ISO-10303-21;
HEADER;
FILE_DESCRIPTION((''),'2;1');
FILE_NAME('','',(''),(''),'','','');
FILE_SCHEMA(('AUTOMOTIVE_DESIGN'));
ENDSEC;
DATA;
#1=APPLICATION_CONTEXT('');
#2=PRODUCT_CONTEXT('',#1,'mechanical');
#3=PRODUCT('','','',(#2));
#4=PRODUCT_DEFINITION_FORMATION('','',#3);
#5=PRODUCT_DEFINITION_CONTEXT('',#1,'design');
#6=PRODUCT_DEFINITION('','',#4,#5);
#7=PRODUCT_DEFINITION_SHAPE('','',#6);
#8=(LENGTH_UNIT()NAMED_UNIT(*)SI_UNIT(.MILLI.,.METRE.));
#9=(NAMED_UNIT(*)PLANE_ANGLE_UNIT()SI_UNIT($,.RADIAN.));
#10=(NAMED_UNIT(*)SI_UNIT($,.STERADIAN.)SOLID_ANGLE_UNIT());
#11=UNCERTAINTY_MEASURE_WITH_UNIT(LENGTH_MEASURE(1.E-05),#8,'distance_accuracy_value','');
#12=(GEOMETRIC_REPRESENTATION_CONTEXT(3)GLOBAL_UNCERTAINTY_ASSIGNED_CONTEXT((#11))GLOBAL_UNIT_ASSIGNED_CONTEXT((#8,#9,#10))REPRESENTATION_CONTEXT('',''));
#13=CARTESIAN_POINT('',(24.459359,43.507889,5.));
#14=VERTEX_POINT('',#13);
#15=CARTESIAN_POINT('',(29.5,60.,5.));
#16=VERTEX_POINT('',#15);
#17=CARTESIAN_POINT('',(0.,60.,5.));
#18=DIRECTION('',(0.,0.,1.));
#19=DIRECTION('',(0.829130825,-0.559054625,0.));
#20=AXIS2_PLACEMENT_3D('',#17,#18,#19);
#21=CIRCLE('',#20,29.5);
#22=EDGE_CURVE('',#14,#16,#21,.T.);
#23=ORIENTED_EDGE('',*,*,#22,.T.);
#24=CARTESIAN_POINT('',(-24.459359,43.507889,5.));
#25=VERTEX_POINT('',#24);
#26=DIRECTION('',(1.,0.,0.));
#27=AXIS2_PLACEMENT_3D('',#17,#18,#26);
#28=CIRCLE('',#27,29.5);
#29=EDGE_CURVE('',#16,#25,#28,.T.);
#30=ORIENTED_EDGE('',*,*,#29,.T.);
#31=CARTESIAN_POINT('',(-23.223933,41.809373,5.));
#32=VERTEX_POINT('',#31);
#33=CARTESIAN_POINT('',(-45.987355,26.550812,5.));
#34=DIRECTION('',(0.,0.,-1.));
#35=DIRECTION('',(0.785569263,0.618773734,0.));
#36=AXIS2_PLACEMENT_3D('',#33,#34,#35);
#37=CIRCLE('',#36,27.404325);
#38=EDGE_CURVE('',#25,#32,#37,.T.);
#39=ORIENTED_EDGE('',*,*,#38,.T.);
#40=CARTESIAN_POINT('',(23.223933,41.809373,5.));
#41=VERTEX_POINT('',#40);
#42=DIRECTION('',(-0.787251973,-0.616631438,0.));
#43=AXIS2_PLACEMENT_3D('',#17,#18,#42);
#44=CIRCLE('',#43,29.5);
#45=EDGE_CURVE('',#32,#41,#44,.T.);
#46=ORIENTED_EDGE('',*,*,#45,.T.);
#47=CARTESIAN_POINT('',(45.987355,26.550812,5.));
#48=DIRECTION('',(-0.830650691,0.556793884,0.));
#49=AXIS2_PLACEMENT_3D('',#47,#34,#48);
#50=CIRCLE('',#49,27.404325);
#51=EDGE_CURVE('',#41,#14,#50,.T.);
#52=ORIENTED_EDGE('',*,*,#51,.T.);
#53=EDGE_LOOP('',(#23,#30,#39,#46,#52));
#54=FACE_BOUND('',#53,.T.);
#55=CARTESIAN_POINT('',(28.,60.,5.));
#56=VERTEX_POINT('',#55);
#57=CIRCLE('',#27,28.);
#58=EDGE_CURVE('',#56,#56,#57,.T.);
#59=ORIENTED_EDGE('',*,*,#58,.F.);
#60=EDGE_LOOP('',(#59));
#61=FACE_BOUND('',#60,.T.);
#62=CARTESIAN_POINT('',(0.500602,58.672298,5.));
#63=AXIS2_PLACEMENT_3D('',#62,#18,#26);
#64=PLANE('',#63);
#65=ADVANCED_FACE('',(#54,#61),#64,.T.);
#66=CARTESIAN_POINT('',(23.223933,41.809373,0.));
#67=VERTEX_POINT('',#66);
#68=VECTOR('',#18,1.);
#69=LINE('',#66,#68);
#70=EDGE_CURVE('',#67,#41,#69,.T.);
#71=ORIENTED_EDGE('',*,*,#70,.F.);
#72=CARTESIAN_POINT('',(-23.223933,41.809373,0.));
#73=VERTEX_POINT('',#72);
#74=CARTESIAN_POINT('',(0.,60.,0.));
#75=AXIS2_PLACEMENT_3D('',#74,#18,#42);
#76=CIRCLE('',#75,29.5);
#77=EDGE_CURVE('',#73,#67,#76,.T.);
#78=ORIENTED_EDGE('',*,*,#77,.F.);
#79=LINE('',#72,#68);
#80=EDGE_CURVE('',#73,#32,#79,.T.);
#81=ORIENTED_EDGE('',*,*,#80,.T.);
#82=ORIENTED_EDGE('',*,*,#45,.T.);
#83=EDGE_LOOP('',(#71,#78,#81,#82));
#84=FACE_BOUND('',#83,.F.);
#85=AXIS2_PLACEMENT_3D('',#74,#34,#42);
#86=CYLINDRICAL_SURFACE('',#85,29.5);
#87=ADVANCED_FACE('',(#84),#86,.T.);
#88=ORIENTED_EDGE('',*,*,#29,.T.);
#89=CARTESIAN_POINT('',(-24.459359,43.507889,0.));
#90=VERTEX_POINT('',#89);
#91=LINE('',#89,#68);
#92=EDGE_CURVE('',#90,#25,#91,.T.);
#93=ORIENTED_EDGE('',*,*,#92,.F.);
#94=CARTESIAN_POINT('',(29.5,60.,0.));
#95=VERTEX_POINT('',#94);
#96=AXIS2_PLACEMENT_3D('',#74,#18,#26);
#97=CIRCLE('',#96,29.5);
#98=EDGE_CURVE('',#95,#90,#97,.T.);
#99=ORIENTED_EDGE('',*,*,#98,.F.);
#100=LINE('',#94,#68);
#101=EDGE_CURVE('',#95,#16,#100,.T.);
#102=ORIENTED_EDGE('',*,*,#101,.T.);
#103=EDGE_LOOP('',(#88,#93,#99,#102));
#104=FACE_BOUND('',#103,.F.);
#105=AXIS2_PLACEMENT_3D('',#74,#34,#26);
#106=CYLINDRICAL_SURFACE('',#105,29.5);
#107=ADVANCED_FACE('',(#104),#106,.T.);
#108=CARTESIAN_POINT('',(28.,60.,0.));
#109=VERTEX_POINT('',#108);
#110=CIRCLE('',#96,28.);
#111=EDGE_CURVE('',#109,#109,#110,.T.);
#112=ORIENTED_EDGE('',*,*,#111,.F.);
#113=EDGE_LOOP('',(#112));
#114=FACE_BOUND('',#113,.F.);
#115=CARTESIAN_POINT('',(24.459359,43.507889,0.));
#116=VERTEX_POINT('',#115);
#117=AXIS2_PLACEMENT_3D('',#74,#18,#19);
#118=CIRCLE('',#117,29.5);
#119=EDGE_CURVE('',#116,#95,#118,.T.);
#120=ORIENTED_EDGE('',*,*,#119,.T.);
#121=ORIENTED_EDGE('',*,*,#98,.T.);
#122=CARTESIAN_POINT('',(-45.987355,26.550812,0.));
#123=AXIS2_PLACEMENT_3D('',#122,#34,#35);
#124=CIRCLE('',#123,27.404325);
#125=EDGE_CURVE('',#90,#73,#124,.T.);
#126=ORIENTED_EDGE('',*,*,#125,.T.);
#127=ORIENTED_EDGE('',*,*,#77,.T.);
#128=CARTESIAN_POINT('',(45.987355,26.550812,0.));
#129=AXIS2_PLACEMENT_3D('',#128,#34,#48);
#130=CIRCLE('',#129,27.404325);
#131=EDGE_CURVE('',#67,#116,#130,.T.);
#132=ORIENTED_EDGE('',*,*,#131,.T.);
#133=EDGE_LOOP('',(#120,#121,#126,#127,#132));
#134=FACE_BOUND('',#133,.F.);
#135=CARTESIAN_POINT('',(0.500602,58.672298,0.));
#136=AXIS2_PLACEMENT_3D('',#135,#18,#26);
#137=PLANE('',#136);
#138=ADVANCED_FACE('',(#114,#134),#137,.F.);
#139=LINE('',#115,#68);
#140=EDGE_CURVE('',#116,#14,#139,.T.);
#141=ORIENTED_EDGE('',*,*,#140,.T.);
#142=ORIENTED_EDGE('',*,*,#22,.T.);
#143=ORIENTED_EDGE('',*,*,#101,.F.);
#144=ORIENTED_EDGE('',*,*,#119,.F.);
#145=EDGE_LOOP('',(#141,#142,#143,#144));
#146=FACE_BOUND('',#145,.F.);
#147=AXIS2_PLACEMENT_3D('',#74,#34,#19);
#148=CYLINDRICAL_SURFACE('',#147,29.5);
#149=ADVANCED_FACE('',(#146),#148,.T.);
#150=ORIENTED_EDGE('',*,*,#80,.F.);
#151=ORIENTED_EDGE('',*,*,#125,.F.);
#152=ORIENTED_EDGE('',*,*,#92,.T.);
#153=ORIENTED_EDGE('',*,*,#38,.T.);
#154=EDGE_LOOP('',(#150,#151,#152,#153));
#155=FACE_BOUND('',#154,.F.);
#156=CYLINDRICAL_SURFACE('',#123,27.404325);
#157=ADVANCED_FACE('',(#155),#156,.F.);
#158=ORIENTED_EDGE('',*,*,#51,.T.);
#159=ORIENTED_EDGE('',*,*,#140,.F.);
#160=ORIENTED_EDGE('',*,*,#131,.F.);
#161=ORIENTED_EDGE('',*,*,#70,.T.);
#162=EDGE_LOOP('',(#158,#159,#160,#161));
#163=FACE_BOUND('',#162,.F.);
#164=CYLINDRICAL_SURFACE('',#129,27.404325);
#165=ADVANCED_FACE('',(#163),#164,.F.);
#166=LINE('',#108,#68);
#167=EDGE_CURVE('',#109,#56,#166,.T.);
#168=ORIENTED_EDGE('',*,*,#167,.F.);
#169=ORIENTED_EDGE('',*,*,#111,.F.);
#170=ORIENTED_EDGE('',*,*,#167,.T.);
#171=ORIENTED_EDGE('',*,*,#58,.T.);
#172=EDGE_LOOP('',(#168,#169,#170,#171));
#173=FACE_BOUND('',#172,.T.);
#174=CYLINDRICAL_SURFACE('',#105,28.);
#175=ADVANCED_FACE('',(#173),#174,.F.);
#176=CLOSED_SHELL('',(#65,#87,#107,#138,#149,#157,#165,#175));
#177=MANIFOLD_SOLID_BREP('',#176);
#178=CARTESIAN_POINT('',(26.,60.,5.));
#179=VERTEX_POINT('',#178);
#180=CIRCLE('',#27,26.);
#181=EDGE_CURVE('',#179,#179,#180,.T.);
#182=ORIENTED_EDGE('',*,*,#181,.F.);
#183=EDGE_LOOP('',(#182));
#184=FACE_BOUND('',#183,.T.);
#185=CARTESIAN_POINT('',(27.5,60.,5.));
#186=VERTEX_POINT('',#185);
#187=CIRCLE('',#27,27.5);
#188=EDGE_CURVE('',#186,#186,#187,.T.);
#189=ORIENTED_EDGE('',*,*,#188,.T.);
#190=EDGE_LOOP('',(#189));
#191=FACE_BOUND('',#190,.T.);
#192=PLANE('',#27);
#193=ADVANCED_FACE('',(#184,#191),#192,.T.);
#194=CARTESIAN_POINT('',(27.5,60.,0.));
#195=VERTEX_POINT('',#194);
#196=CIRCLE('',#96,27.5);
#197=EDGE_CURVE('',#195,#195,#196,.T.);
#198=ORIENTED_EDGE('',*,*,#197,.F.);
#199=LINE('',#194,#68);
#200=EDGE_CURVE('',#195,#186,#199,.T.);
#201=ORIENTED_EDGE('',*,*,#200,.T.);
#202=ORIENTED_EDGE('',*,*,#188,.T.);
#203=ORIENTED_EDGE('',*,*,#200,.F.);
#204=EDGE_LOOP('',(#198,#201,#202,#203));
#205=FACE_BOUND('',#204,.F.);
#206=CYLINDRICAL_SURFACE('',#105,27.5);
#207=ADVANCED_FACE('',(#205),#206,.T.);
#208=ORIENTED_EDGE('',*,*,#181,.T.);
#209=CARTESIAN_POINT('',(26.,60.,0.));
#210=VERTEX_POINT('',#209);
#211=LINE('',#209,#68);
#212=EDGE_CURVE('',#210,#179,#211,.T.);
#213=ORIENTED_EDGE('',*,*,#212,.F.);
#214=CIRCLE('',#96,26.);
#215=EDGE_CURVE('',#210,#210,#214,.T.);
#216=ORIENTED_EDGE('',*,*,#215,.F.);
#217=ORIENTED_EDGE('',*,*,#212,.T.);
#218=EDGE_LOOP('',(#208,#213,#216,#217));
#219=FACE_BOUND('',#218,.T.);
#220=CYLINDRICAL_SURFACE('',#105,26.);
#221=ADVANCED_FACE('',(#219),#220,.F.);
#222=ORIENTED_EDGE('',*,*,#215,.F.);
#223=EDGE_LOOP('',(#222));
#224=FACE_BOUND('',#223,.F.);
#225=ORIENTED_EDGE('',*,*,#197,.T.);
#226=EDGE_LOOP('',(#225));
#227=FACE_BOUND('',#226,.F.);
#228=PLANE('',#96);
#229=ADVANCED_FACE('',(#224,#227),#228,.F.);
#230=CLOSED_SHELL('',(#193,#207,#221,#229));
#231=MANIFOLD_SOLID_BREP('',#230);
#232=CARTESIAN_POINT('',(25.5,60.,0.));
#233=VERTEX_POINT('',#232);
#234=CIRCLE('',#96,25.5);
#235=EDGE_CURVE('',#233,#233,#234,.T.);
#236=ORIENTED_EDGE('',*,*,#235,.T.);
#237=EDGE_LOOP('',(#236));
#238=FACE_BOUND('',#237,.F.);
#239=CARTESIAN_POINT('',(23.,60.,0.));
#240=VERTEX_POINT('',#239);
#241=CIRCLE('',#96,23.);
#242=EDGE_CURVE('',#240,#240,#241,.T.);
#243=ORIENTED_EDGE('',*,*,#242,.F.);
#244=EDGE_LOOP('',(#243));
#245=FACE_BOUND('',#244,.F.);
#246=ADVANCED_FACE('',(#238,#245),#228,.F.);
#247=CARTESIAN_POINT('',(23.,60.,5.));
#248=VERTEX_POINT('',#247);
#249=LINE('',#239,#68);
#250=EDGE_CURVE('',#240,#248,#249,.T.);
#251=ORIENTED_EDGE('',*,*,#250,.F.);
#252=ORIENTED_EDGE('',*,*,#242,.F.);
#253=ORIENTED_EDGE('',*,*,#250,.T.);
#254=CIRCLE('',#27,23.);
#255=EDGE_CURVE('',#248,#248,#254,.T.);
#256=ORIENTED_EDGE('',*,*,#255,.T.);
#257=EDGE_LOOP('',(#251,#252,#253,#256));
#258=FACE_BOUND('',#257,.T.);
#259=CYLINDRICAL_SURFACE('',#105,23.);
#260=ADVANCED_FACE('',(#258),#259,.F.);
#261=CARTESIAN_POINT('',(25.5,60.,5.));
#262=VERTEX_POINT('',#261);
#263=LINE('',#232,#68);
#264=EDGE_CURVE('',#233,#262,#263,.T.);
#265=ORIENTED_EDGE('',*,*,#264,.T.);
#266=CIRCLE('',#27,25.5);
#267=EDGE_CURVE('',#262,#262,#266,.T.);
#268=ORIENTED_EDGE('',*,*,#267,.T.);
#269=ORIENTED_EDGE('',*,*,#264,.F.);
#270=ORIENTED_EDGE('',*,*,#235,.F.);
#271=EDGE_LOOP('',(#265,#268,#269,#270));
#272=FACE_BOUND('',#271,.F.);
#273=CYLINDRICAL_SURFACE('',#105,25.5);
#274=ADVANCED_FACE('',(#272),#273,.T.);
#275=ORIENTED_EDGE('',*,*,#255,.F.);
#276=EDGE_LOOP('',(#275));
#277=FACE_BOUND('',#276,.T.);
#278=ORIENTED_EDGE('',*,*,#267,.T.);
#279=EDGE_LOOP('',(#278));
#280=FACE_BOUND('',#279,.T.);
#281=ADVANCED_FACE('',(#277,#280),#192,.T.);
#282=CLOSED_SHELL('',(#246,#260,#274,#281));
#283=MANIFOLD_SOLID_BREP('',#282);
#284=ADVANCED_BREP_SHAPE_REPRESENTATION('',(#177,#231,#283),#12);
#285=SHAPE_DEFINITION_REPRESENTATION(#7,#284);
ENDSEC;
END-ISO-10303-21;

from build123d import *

# Parameters (mm, degrees)
F0_R     = 28
F1_DEPTH = 5
F0_R_2   = 25.5
F0_R_3   = 23
F0_R_4   = 27.5
F0_R_5   = 26


# Not quite as in the source:
# - a feature names something its author has since deleted; it is built from what else it names


with BuildPart() as f1:
    # F0 (on Top) → F1 (new body)
    with BuildSketch(Plane.XY):
        with BuildLine():
            ThreePointArc((24.4593593513, 43.5078885487), (28.211709456, 51.377387312), (29.5, 60))
            ThreePointArc((29.5, 60), (-8.622612688, 88.211709456), (-24.4593593513, 43.5078885487))
            ThreePointArc((-24.4593593513, 43.5078885487), (-23.8253683168, 42.6704704408), (-23.2239332129, 41.8093725747))
            ThreePointArc((-23.2239332129, 41.8093725747), (0, 30.5), (23.2239332129, 41.8093725747))
            ThreePointArc((23.2239332129, 41.8093725747), (23.8253683168, 42.6704704408), (24.4593593513, 43.5078885487))
        make_face()
        with Locations((0, 60)):
            Circle(F0_R, mode=Mode.SUBTRACT)
    extrude(amount=F1_DEPTH)


with BuildPart() as f1b:
    # F0 (on Top) → F1, piece 2 (new body)
    with BuildSketch(Plane.XY):
        with Locations((0, 60)):
            Circle(F0_R_2)
        with Locations((0, 60)):
            Circle(F0_R_3, mode=Mode.SUBTRACT)
    extrude(amount=F1_DEPTH)


with BuildPart() as f1c:
    # F0 (on Top) → F1, piece 3 (new body)
    with BuildSketch(Plane.XY):
        with Locations((0, 60)):
            Circle(F0_R_4)
        with Locations((0, 60)):
            Circle(F0_R_5, mode=Mode.SUBTRACT)
    extrude(amount=F1_DEPTH)


solid = Compound([f1.part, f1b.part, f1c.part])
